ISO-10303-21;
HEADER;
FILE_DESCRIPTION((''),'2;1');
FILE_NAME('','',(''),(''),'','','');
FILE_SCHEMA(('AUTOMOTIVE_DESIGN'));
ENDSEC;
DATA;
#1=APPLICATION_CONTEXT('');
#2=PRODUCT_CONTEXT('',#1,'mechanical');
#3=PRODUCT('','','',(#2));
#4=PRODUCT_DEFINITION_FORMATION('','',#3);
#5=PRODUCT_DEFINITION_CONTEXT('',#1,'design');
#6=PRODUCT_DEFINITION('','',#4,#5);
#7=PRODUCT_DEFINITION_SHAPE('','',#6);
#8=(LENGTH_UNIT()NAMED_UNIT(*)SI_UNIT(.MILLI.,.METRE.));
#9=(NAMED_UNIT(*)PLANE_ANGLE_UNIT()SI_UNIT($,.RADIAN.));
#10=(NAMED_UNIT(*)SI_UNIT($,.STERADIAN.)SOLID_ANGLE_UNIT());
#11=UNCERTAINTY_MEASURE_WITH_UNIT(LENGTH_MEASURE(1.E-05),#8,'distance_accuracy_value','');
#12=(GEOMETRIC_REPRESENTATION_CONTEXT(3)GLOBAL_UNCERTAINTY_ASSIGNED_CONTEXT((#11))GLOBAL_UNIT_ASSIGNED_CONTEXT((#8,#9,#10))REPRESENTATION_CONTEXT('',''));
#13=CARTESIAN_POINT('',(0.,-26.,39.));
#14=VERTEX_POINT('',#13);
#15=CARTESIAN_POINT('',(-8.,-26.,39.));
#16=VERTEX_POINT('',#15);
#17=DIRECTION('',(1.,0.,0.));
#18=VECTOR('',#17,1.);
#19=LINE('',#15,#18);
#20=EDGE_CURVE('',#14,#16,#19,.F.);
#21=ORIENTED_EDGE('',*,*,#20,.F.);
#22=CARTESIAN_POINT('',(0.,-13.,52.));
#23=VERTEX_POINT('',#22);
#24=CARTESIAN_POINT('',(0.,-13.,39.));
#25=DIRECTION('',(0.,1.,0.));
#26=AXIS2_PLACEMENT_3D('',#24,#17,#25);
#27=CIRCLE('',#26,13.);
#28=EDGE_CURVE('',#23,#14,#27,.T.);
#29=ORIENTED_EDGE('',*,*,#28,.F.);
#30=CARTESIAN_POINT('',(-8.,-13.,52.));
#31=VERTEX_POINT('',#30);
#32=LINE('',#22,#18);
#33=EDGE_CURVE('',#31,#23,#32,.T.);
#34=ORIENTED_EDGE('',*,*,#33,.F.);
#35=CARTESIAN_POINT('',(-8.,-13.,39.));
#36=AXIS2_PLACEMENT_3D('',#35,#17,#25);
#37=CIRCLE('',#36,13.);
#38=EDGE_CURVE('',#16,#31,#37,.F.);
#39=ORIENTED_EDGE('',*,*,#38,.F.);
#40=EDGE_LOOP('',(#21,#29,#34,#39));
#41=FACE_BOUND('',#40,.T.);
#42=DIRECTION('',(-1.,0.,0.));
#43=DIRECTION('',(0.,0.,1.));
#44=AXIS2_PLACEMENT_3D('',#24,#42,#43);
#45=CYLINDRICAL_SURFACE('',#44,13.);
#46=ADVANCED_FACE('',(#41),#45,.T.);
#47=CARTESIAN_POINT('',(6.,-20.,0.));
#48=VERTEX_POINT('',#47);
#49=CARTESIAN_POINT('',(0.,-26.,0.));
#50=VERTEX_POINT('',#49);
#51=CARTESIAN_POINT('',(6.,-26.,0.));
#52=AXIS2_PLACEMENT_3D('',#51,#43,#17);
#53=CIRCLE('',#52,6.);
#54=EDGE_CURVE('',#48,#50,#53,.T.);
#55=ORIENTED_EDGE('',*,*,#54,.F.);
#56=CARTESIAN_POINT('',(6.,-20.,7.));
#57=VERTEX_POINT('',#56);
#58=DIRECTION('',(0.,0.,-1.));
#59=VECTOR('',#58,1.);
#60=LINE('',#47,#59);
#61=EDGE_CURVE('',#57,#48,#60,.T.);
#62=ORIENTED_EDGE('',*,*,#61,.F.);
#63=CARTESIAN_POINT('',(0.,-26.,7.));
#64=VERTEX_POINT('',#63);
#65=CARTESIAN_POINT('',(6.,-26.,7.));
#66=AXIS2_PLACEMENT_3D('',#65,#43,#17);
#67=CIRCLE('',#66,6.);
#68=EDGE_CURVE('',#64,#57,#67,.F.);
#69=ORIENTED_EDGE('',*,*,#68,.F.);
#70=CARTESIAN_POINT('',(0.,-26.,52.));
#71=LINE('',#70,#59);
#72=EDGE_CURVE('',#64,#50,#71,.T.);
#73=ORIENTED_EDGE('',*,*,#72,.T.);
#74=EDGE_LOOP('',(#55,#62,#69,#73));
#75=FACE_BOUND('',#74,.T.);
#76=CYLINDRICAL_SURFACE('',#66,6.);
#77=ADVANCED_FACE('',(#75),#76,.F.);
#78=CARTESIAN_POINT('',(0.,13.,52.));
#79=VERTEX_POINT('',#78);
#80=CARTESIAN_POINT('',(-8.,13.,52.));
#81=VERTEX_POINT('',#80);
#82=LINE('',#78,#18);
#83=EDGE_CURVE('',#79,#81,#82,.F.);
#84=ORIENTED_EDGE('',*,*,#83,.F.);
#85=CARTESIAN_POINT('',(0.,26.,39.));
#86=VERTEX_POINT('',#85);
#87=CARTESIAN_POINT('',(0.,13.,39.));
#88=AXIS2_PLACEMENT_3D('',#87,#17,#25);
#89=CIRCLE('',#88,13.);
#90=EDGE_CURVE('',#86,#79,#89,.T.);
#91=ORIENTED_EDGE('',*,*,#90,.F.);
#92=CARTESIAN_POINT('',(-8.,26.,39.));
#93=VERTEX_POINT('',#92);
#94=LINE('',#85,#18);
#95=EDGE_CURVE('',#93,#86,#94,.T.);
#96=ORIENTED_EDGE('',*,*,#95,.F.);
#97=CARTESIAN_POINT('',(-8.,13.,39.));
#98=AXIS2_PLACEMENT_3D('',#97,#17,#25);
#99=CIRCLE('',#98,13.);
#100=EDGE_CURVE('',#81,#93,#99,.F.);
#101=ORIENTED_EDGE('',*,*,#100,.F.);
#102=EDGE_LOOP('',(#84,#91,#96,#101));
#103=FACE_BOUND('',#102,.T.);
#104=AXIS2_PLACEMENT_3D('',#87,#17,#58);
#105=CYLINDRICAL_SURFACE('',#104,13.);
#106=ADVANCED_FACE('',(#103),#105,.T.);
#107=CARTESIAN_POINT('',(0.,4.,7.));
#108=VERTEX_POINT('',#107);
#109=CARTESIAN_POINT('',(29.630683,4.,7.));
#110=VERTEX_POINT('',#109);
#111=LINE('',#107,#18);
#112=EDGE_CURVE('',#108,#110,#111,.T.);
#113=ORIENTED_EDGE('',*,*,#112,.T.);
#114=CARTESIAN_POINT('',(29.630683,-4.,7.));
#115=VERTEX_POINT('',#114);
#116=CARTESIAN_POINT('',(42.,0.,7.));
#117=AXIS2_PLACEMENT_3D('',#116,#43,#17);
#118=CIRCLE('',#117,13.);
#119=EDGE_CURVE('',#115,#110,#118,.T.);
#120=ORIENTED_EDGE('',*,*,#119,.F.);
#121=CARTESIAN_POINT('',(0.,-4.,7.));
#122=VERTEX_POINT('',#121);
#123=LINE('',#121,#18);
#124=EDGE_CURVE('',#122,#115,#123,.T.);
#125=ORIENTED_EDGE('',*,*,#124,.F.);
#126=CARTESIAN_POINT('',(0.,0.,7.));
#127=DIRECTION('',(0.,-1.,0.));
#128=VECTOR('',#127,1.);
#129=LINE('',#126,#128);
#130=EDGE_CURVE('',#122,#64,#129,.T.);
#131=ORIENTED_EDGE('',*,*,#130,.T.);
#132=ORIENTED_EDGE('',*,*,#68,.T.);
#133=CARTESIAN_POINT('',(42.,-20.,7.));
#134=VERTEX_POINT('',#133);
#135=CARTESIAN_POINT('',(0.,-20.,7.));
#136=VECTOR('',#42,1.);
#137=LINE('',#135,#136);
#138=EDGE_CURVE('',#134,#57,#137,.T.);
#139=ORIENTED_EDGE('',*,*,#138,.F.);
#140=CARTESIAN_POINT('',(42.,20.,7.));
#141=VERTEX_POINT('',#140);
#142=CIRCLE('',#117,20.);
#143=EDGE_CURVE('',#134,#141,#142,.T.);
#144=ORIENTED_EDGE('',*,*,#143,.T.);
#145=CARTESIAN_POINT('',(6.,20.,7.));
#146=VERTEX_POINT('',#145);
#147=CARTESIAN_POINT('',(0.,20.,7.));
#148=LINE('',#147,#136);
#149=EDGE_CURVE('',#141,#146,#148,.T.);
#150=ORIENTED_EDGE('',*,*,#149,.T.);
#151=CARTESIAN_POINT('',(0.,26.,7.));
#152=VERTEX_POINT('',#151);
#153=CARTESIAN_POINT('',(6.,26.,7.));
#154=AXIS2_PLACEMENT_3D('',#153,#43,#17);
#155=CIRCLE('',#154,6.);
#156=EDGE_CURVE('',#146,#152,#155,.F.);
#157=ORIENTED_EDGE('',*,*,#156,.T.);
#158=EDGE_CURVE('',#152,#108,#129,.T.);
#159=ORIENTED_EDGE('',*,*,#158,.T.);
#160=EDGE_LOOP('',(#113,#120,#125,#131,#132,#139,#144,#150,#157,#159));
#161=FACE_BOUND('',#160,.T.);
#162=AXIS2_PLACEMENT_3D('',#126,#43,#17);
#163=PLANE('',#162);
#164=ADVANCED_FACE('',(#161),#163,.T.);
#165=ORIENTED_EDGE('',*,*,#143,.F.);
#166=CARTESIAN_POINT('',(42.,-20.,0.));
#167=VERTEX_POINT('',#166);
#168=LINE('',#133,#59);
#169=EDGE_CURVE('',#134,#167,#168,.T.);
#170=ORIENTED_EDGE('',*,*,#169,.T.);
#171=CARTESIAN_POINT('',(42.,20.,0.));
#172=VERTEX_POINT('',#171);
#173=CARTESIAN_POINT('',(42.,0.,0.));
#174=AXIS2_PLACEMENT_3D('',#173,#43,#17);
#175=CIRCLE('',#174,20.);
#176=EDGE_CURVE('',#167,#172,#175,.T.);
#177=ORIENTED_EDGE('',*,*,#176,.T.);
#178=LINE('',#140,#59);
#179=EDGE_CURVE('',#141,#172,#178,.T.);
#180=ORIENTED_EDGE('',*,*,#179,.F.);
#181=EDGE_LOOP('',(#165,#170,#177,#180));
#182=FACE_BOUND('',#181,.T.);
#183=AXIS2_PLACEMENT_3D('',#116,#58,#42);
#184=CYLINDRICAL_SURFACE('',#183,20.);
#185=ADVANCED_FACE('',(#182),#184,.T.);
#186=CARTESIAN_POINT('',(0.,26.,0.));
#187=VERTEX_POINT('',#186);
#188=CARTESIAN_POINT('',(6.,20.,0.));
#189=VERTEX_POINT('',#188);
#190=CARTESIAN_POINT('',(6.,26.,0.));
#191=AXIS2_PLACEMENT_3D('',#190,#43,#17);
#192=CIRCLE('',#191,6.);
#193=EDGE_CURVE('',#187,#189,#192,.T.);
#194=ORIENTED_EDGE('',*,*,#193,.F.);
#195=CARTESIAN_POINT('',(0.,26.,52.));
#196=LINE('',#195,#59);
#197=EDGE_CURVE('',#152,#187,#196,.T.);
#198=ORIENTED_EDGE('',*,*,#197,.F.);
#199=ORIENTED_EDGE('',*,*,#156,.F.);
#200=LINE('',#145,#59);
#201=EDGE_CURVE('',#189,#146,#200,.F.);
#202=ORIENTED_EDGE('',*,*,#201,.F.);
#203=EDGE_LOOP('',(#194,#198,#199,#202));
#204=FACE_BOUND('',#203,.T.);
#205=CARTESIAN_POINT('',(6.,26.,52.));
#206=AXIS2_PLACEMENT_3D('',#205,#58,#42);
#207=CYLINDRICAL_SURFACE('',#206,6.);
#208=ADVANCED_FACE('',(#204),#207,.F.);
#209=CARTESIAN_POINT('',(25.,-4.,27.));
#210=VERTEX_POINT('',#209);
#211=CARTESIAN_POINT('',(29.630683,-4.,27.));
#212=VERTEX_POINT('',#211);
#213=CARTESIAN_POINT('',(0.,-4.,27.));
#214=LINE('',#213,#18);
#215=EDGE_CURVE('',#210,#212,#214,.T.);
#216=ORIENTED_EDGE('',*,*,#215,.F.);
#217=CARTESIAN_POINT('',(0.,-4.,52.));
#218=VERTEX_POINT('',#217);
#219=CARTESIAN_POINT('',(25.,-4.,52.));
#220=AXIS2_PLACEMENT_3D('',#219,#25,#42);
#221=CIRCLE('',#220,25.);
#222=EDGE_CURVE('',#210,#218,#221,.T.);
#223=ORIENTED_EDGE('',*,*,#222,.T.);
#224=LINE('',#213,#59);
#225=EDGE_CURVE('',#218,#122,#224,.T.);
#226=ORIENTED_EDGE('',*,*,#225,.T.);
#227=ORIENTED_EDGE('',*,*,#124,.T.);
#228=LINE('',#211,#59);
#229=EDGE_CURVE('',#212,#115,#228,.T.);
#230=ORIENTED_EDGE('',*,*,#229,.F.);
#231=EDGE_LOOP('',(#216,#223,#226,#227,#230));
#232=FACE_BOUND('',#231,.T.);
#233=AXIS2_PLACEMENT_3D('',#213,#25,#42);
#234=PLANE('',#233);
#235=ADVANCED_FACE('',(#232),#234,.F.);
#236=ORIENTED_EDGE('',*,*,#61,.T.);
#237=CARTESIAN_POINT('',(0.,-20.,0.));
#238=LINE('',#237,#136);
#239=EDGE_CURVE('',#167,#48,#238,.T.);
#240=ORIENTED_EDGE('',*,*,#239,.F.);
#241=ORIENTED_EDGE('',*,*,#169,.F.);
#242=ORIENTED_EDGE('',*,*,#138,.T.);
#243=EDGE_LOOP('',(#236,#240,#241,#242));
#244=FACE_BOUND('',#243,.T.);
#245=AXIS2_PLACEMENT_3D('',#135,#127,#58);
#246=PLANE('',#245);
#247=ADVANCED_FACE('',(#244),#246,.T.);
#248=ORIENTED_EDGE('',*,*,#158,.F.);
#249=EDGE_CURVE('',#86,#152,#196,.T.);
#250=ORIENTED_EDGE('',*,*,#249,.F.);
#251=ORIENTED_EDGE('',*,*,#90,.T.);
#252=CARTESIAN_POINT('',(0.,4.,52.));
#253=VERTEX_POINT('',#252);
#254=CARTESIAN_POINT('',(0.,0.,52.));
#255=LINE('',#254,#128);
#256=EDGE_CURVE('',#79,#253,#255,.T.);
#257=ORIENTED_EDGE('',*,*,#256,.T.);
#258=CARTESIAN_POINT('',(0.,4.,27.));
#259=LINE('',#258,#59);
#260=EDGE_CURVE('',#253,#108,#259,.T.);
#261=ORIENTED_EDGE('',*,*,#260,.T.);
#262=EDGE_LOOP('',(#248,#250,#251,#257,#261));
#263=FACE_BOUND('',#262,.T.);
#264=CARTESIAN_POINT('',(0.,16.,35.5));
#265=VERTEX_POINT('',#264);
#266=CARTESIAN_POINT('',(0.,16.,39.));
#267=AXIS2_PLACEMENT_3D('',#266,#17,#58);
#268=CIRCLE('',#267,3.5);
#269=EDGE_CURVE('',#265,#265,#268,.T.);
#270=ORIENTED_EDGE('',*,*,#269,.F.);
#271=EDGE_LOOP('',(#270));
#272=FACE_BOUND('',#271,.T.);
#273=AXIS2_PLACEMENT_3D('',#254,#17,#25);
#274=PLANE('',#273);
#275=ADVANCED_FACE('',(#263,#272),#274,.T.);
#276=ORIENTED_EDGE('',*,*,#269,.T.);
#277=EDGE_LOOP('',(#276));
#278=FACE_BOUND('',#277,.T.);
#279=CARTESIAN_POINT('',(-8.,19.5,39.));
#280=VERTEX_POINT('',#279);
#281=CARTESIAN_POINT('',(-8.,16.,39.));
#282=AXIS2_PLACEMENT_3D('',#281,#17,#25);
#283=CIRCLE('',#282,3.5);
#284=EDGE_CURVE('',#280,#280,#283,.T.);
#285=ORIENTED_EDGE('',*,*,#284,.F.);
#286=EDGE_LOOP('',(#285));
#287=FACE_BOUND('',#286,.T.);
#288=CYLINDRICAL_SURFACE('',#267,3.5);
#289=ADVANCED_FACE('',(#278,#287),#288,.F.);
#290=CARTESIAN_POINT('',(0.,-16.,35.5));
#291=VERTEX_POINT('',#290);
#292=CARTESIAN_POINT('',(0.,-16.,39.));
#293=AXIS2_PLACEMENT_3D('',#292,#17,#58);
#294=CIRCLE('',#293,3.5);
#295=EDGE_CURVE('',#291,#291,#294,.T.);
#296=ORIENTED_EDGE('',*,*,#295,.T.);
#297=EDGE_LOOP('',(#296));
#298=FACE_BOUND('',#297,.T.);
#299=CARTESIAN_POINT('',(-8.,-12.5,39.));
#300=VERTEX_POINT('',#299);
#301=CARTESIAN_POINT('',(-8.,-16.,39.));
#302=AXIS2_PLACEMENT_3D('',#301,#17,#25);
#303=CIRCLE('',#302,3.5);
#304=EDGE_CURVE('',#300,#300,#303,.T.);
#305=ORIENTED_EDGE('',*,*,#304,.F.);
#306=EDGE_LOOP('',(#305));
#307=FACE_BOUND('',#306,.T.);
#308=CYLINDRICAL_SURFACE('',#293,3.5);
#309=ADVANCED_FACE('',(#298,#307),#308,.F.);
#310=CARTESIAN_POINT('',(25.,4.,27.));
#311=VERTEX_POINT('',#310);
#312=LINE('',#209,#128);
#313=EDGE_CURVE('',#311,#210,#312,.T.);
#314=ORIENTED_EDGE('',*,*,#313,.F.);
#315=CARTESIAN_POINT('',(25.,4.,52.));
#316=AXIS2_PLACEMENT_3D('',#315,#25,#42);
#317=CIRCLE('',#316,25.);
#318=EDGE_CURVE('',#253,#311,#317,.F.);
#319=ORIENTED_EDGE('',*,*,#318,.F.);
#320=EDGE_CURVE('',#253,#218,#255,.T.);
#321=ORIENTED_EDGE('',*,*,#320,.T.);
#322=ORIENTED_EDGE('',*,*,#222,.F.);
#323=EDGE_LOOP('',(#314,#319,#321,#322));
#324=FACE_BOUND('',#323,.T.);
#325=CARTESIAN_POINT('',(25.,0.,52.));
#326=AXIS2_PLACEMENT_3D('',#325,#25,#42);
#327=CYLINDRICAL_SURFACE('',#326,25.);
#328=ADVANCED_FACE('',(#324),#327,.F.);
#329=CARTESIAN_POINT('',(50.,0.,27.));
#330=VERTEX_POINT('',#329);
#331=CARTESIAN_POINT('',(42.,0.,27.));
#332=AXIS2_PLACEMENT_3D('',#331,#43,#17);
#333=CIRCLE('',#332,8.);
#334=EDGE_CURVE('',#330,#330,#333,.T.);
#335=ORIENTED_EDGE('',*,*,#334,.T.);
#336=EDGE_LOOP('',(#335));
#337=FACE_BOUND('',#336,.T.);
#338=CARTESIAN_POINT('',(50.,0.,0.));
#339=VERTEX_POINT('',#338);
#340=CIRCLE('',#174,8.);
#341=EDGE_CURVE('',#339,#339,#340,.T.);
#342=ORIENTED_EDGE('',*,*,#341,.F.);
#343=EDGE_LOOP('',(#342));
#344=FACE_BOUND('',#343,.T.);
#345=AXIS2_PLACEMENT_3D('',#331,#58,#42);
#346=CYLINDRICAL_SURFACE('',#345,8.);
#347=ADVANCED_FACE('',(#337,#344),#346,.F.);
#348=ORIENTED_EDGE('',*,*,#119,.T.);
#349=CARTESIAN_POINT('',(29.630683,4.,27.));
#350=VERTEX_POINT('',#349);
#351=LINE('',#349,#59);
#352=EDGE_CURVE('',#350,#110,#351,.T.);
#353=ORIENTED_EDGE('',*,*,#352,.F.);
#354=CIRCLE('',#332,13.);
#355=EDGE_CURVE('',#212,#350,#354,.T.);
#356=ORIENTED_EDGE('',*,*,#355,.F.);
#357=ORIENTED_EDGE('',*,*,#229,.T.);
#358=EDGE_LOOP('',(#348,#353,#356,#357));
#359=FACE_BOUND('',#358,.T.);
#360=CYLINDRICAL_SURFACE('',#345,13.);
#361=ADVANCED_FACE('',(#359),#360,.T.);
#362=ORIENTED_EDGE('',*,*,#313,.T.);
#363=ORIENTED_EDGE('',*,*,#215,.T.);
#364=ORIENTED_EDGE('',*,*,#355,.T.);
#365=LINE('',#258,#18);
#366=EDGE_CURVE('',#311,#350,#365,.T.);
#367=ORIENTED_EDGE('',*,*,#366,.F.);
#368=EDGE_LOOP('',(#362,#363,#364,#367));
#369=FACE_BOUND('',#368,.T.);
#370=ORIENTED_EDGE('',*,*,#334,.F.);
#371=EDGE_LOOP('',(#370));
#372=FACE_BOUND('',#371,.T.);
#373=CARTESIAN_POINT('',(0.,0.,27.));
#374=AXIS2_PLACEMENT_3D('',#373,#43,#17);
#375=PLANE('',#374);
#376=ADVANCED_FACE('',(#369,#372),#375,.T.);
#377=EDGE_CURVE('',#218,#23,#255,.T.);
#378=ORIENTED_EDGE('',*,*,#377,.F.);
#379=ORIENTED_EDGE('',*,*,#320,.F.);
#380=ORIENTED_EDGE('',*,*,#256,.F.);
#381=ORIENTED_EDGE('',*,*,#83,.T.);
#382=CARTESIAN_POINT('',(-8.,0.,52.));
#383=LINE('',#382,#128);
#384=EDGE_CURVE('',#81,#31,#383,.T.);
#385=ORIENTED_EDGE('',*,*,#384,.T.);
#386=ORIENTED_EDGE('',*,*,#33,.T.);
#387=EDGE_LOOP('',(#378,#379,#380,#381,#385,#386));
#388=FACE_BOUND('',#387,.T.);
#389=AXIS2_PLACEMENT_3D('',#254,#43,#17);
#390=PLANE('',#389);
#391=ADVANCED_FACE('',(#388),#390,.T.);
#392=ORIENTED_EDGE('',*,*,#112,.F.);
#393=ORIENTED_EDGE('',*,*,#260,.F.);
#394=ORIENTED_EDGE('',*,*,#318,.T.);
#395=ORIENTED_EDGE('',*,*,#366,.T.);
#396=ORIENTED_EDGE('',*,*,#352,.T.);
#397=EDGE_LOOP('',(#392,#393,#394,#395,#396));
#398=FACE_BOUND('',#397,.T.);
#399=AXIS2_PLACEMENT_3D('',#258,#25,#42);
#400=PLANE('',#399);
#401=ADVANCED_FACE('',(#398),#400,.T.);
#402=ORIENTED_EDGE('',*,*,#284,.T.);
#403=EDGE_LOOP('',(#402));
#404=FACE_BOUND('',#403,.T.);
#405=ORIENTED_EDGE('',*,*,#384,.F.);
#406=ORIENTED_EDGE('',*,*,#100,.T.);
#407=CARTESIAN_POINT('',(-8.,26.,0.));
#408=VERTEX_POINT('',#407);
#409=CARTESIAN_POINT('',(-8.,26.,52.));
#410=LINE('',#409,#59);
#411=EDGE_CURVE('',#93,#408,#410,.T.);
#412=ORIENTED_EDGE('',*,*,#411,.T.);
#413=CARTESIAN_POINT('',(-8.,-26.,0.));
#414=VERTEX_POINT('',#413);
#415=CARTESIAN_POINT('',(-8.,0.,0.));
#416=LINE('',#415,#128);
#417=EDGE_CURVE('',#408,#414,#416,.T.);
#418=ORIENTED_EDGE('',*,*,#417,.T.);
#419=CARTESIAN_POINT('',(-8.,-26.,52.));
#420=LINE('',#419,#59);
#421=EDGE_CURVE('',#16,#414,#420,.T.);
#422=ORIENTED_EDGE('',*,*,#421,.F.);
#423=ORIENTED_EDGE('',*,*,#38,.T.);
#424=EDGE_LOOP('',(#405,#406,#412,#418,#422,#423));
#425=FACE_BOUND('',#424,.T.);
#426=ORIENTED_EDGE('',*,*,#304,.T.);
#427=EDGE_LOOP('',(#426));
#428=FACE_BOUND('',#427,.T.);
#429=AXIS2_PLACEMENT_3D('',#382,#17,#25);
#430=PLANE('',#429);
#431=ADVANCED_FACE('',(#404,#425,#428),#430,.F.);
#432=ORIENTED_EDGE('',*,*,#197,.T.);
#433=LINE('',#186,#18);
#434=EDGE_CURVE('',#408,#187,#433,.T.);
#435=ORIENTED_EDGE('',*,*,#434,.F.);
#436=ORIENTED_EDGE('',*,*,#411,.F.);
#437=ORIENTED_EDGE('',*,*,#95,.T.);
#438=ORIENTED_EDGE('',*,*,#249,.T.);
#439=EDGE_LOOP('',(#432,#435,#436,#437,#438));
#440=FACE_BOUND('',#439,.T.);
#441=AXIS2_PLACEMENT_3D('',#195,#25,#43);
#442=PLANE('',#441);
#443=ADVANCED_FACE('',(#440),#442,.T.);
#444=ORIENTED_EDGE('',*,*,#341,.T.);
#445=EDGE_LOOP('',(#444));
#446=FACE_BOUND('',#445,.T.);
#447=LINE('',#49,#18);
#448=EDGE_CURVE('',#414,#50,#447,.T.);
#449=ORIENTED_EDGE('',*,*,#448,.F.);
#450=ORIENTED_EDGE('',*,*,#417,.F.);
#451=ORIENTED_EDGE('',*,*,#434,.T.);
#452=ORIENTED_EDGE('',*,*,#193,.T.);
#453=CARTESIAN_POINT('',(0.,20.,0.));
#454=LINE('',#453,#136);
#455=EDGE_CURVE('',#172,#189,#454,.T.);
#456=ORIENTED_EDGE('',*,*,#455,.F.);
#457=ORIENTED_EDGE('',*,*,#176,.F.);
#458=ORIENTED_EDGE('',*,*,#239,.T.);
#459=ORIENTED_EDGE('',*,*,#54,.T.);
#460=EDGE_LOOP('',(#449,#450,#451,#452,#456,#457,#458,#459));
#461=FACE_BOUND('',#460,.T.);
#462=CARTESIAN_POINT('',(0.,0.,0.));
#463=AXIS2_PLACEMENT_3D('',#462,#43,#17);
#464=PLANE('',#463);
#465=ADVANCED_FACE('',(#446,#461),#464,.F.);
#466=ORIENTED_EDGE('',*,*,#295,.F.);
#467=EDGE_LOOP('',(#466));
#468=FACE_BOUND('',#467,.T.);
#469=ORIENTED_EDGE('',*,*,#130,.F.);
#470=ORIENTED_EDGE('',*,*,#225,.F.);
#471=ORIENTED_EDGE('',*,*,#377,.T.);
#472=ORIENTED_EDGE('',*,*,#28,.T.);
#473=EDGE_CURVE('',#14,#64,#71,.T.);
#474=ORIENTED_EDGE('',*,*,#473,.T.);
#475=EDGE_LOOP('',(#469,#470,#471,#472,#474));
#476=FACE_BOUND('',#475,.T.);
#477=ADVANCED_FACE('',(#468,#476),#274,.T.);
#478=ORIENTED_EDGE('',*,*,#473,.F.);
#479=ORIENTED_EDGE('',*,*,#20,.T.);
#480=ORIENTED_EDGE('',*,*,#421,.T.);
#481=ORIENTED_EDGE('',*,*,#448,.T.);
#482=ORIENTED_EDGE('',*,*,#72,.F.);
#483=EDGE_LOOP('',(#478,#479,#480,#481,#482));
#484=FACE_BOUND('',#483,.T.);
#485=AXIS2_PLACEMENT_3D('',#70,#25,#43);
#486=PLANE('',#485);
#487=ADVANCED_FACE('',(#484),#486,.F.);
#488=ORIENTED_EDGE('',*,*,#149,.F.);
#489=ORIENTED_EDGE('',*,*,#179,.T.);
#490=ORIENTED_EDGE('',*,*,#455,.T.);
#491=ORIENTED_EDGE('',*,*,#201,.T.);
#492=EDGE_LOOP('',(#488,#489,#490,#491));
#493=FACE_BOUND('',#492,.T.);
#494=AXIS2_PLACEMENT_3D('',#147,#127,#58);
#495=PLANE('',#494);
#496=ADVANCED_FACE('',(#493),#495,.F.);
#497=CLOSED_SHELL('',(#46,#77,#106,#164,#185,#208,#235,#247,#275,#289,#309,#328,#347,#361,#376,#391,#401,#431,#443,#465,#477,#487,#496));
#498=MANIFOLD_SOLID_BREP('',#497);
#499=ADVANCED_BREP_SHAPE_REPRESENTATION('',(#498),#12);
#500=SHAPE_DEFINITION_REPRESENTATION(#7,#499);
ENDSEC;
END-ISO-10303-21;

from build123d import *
from OCP.BRepFilletAPI import BRepFilletAPI_MakeFillet

# Parameters (mm, degrees)
SKETCH1_W                  = 8
SKETCH1_H                  = 52
BOSS_EXTRUDE1_DEPTH        = 52
BOSS_EXTRUDE2_DEPTH        = 7
SKETCH1_4_R                = 13
SKETCH1_4_R_2              = 8
BOSS_EXTRUDE3_DEPTH        = 27
FILLET1_R                  = 25
FILLET1_R_2                = 6
FILLET1_R_3                = 13
F_12_0MM_DOWEL_HOLE1_D     = 7
F_12_0MM_DOWEL_HOLE1_DEPTH = 30
F_12_0MM_DOWEL_HOLE1_TIP   = 2.103012167


with BuildPart() as part:
    # Sketch1 → Boss-Extrude1 (new body)
    with BuildSketch(Plane.XY):
        with Locations((-4, 0)):
            Rectangle(SKETCH1_W, SKETCH1_H)
    extrude(amount=BOSS_EXTRUDE1_DEPTH)

    # Sketch1<3> → Boss-Extrude2 (add)
    with BuildSketch(Plane.XY):
        with BuildLine():
            Line((42, 20), (0, 20))
            Line((0, 20), (0, 4))
            Line((0, 4), (29.630683123, 4))
            ThreePointArc((29.630683123, 4), (44.02470746, 12.841361287), (55, 0))
            ThreePointArc((55, 0), (44.02470746, -12.841361287), (29.630683123, -4))
            Line((29.630683123, -4), (0, -4))
            Line((0, -4), (0, -20))
            Line((0, -20), (42, -20))
            ThreePointArc((42, -20), (62, 0), (42, 20))
        make_face()
    extrude(amount=BOSS_EXTRUDE2_DEPTH)

    # Sketch1<4> → Boss-Extrude3 (add)
    # profile 1 of 2: a face of its own
    with BuildSketch(Plane.XY):
        with Locations((42, 0)):
            Circle(SKETCH1_4_R)
        with Locations((42, 0)):
            Circle(SKETCH1_4_R_2, mode=Mode.SUBTRACT)
    # profile 2 of 2: a face of its own
    with BuildSketch(Plane.XY):
        with BuildLine():
            Line((29.630683123, 4), (0, 4))
            Line((0, 4), (0, -4))
            Line((0, -4), (29.630683123, -4))
            ThreePointArc((29.630683123, -4), (29, 0), (29.630683123, 4))
        make_face()
    extrude(amount=BOSS_EXTRUDE3_DEPTH)

    # Fillet1
    fillet1_edges_1 = [part.edges().sort_by_distance(p)[0] for p in [
        (0, 0, 27),
    ]]
    fillet1_edges_2 = [part.edges().sort_by_distance(p)[0] for p in [
        (0, -20, 3.5),
        (0, 20, 3.5),
    ]]
    fillet1 = BRepFilletAPI_MakeFillet(part.part.solid().wrapped)
    for e in fillet1_edges_1:
        fillet1.Add(FILLET1_R - 0.0001, e.wrapped)
    for e in fillet1_edges_2:
        fillet1.Add(FILLET1_R_2 - 0.0001, e.wrapped)
    add(Compound.cast(fillet1.Shape()), mode=Mode.REPLACE)  # a hair under: the kernel refuses the full size
    fillet1_2_edges = [part.edges().sort_by_distance(p)[0] for p in [
        (-4, -26, 52),
        (-4, 26, 52),
    ]]
    fillet(fillet1_2_edges, radius=FILLET1_R_3)

    # Ø12.0mm Dowel Hole1
    with Locations(Plane(origin=(0, 16, 39), x_dir=(0, 1, 0), z_dir=(1, 0, 0))):
        with Locations((0, 0), (-32, 0)):
            Hole(F_12_0MM_DOWEL_HOLE1_D / 2, depth=F_12_0MM_DOWEL_HOLE1_DEPTH)
            with Locations((0, 0, -(F_12_0MM_DOWEL_HOLE1_DEPTH + F_12_0MM_DOWEL_HOLE1_TIP / 2))):  # 118° drill point
                Cone(0, F_12_0MM_DOWEL_HOLE1_D / 2, F_12_0MM_DOWEL_HOLE1_TIP, mode=Mode.SUBTRACT)


solid = part.part
